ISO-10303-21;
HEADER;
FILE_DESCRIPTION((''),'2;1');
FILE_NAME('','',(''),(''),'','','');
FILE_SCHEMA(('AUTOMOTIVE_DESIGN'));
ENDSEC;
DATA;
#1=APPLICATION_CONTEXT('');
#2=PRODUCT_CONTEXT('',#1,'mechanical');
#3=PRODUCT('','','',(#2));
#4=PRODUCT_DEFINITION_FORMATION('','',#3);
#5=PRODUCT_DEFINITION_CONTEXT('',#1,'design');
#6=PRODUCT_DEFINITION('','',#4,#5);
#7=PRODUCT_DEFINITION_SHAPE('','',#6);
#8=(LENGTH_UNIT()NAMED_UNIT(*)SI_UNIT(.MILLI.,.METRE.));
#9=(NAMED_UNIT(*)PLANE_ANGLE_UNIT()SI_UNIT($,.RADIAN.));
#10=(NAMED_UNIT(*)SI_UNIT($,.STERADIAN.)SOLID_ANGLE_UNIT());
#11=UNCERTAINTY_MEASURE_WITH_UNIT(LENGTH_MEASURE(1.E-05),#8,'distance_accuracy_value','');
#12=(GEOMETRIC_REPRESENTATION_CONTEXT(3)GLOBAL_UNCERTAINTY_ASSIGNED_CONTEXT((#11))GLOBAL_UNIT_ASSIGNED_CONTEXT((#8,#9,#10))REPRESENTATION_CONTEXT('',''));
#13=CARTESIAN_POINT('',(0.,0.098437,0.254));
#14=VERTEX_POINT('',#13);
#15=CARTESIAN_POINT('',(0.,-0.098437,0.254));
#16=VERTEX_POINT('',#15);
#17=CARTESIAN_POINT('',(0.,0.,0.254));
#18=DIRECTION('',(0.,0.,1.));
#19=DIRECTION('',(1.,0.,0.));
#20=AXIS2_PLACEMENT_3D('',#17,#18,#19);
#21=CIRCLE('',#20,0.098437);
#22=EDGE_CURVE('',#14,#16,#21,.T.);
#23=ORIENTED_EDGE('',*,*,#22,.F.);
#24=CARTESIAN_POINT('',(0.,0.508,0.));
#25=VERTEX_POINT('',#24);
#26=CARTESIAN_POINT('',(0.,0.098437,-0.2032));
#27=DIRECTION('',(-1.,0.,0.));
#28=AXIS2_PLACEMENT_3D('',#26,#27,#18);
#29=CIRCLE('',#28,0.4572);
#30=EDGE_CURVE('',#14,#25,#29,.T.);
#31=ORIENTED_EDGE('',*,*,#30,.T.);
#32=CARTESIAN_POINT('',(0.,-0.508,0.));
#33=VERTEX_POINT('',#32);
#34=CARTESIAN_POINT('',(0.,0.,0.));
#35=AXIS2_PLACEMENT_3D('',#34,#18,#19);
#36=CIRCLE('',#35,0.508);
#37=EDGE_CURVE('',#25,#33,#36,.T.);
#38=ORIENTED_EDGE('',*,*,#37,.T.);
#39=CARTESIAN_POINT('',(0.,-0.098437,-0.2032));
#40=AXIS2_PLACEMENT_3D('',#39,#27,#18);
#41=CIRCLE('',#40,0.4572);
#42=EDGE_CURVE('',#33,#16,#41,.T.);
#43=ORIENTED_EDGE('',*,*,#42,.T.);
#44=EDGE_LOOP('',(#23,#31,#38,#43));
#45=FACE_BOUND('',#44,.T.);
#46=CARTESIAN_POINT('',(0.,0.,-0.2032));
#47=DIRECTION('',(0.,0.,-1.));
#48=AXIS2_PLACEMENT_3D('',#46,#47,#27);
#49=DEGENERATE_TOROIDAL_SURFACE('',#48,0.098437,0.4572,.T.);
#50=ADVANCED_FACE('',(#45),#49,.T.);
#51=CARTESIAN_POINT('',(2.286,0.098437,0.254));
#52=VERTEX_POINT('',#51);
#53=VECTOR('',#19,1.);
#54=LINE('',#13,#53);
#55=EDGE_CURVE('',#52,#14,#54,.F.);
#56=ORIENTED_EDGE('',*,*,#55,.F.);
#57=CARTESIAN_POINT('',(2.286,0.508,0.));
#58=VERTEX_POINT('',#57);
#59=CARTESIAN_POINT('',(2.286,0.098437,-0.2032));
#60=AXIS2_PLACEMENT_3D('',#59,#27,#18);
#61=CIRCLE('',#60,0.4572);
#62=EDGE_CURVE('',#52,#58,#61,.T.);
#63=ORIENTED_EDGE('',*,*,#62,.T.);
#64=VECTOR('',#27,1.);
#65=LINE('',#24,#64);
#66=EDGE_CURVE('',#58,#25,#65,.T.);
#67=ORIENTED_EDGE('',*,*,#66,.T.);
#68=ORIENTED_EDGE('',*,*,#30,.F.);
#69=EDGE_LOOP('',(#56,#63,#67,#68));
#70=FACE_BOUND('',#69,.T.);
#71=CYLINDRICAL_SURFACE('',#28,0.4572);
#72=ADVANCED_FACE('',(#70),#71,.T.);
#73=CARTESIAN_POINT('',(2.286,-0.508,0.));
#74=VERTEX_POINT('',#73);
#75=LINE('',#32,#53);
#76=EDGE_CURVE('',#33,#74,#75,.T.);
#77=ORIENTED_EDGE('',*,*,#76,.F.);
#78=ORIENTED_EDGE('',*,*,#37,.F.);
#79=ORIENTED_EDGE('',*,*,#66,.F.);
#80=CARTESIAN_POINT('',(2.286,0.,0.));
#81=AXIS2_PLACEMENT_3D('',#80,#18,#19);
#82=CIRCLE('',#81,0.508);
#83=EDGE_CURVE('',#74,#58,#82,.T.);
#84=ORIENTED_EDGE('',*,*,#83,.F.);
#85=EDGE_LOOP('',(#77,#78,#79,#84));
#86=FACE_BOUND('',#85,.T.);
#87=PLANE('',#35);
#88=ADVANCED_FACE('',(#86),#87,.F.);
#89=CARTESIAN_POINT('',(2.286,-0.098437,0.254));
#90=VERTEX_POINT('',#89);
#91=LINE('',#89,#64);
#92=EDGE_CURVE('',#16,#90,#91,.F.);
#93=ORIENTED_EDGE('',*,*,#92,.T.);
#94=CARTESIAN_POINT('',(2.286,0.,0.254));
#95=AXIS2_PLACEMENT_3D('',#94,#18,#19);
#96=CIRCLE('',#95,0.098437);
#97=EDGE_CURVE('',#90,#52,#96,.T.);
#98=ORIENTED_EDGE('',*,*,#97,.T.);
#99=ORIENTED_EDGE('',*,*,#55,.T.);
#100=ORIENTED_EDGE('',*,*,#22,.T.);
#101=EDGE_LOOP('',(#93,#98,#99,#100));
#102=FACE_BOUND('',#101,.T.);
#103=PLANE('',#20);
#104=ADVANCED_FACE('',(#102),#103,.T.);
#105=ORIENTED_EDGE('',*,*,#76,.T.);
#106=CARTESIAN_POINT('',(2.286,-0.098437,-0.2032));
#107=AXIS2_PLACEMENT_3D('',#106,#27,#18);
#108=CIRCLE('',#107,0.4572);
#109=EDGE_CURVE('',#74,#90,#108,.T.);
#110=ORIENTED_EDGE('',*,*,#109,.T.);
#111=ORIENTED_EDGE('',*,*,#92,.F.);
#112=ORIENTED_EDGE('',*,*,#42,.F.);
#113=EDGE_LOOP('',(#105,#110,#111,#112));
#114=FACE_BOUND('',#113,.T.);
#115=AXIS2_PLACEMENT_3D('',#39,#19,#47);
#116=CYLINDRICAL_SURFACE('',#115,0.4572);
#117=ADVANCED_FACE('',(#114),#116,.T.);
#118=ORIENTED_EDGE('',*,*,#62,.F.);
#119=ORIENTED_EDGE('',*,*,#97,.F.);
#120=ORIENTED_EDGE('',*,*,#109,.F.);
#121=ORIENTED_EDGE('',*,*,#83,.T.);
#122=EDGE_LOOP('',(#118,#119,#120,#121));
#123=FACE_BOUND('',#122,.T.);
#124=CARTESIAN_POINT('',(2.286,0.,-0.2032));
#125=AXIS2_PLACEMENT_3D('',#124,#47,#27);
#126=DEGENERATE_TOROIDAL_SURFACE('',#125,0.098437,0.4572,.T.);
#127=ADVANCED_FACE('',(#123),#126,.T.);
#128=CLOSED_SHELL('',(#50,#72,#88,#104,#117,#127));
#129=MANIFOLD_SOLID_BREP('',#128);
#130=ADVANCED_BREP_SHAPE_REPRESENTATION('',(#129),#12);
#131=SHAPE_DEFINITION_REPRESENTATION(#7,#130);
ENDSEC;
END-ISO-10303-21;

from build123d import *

# Parameters (mm, degrees)
BOSS_EXTRUDE1_DEPTH = 0.254
FILLET5_R           = 0.4572


with BuildPart() as part:
    # Sketch1 → Boss-Extrude1 (new body)
    with BuildSketch(Plane.XY):
        with BuildLine():
            Line((0, 0.508), (2.286, 0.508))
            ThreePointArc((2.286, 0.508), (2.794, 0), (2.286, -0.508))
            Line((2.286, -0.508), (0, -0.508))
            ThreePointArc((0, -0.508), (-0.508, 0), (0, 0.508))
        make_face()
    extrude(amount=BOSS_EXTRUDE1_DEPTH)

    # Fillet5
    # the kernel refuses this fillet: 0.4572 mm, written as the material it takes off along each edge
    with BuildSketch(Plane(origin=(0, 0, 0.254), x_dir=(0, -1, 0), z_dir=(1, 0, 0))) as fillet5_piece_1:
        with BuildLine():
            CenterArc((0.098437306, 0.4572), FILLET5_R, 270, 63.612200039)
            Line((0.098437306, 0), (0.098437306, -0.009144))
            Line((0.098437306, -0.009144), (0.508, -0.009144))
            Line((0.508, -0.009144), (0.517144, 0))
            ThreePointArc((0.517144, 0), (0.517144, 0.127), (0.516191254, 0.249936))
            Line((0.516191254, 0.249936), (0.508, 0.254))
        make_face()
    revolve(axis=Axis((0, 0, 0.254), (0, 0, -1)), revolution_arc=180, mode=Mode.SUBTRACT)
    with BuildSketch(Plane(origin=(2.286, -0.508, 0.254), x_dir=(0, 0, -1), z_dir=(-1, 0, 0)), Plane(origin=(0, 0.508, 0.254), x_dir=(0, 0, -1), z_dir=(1, 0, 0))) as fillet5_piece_2:
        with BuildLine():
            CenterArc((0.4572, -0.409562694), FILLET5_R, 116.387799961, 63.612200039)
            Line((0, -0.409562694), (-0.009144, -0.409562694))
            Line((-0.009144, -0.409562694), (-0.009144, 0))
            Line((-0.009144, 0), (0, 0.009144))
            ThreePointArc((0, 0.009144), (0.127, 0.009144), (0.249936, 0.008191254))
            Line((0.249936, 0.008191254), (0.254, 0))
        make_face()
    extrude(amount=2.286, mode=Mode.SUBTRACT)
    with BuildSketch(Plane(origin=(2.286, 0, 0.254), x_dir=(0, 1, 0), z_dir=(-1, 0, 0))) as fillet5_piece_3:
        with BuildLine():
            CenterArc((0.098437306, 0.4572), FILLET5_R, 270, 63.612200039)
            Line((0.098437306, 0), (0.098437306, -0.009144))
            Line((0.098437306, -0.009144), (0.508, -0.009144))
            Line((0.508, -0.009144), (0.517144, 0))
            ThreePointArc((0.517144, 0), (0.517144, 0.127), (0.516191254, 0.249936))
            Line((0.516191254, 0.249936), (0.508, 0.254))
        make_face()
    revolve(axis=Axis((2.286, 0, 0.254), (0, 0, -1)), revolution_arc=180, mode=Mode.SUBTRACT)


solid = part.part
